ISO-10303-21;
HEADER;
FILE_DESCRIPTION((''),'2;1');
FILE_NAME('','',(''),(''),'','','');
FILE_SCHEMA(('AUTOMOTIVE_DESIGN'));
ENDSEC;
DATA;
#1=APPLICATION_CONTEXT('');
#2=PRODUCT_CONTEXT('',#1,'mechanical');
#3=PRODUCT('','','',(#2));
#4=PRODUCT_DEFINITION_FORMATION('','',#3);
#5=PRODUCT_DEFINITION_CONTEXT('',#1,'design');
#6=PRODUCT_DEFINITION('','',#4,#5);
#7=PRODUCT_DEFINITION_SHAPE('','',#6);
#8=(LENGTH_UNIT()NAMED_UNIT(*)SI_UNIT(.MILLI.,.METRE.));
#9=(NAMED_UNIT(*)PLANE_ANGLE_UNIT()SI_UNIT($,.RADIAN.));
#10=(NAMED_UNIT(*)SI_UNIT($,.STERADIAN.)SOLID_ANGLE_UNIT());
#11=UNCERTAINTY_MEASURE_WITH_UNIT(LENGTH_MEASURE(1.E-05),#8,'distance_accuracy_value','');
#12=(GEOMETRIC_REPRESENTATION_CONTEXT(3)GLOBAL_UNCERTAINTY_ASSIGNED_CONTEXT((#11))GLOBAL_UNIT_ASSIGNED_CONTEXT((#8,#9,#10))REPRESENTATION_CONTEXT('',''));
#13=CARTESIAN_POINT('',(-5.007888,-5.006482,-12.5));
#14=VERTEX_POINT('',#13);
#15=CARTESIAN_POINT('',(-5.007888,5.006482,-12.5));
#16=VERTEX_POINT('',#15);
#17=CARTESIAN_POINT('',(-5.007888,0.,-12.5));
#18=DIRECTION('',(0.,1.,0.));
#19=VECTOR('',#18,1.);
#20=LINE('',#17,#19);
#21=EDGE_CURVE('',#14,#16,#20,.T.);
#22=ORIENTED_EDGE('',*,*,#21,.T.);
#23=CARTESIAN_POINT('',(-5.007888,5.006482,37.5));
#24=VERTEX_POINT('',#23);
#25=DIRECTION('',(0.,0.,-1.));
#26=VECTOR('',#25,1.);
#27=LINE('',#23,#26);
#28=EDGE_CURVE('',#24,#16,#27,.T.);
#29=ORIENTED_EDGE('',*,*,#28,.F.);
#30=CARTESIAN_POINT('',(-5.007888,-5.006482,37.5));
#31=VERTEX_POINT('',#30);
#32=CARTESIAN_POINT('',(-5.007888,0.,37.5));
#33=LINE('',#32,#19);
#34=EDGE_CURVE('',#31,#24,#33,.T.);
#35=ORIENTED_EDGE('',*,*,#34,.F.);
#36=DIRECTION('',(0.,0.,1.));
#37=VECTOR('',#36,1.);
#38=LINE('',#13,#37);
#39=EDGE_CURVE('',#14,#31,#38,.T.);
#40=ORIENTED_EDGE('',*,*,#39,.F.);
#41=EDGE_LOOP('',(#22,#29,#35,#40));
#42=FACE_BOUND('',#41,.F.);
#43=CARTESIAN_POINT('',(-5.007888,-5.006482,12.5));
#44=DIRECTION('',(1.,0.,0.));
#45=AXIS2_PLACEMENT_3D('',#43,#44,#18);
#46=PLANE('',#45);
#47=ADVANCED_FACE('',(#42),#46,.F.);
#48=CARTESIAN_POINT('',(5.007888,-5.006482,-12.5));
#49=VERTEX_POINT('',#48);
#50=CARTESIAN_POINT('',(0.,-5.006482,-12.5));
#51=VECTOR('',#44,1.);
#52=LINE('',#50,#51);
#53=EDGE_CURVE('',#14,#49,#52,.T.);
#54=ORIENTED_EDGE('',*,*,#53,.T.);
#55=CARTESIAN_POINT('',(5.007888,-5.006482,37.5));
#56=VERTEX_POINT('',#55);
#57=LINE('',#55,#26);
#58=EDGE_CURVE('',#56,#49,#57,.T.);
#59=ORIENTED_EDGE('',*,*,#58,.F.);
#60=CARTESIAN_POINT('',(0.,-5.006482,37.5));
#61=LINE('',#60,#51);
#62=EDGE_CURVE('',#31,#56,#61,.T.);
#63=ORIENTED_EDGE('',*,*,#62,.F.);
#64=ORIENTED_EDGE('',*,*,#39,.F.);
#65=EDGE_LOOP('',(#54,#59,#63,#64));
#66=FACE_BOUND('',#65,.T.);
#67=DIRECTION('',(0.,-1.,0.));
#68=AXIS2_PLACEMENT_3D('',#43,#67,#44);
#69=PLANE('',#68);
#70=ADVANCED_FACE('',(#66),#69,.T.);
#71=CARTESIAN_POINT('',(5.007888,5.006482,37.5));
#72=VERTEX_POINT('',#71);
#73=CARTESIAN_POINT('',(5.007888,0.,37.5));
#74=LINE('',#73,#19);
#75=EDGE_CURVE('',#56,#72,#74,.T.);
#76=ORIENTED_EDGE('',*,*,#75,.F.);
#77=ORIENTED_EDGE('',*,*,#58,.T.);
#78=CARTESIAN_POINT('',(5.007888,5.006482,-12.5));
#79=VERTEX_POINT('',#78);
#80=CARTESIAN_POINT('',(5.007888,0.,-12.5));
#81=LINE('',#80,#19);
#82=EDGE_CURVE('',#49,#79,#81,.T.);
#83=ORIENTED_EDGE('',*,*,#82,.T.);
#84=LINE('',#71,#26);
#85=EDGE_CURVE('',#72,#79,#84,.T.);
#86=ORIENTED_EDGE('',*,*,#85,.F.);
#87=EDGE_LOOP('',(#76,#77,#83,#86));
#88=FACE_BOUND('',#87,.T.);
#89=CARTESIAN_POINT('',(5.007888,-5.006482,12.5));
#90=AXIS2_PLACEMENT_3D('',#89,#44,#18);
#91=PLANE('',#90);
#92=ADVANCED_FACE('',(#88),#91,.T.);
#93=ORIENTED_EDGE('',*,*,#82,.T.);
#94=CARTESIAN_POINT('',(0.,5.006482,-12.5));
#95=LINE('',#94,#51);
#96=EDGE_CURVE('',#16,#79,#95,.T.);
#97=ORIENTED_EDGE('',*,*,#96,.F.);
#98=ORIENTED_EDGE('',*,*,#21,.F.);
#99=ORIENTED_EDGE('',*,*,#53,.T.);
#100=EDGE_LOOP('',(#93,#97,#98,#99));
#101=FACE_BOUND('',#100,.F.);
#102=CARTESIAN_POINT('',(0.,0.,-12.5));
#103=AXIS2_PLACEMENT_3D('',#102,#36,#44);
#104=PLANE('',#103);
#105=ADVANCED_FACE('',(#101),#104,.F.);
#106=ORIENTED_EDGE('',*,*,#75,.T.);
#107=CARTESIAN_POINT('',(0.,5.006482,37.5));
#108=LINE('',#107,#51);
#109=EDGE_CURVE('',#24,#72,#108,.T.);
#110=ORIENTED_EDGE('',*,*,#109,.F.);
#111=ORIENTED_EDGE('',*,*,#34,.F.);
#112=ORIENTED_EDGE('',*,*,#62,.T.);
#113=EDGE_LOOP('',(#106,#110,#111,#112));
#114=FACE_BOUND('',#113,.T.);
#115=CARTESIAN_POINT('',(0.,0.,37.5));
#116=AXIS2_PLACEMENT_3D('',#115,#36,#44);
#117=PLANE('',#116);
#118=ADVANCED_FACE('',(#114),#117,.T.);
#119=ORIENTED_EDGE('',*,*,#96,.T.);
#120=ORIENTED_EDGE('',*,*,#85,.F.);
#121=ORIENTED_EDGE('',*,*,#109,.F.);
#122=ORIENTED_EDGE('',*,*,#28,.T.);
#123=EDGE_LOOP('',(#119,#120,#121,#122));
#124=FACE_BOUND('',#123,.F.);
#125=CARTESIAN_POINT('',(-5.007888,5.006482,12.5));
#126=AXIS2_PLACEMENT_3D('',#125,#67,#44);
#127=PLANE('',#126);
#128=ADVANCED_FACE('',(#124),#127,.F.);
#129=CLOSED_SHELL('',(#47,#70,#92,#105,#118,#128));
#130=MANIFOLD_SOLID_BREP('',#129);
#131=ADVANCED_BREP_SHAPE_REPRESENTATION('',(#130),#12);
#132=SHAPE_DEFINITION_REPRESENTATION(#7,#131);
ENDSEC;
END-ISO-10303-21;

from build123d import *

# Parameters (mm, degrees)
F0_R     = 15
F1_DEPTH = 12.5
F2_W     = 10.0157754496
F2_H     = 10.012964718
F3_DEPTH = 25
F4_DEPTH = 25


# Not quite as in the source:
# - a feature of the source that left no trace in its solid (it failed there, or was rolled back) is left out


with BuildPart() as f1:
    # F0 (on Top) → F1 (new body, symmetric)
    with BuildSketch(Plane.XY):
        Circle(F0_R)
    extrude(amount=F1_DEPTH, both=True)

    # F2 (on face) → F3 (join)
    with BuildSketch(Plane.XY.offset(12.5)):
        Rectangle(F2_W, F2_H)
    extrude(amount=F3_DEPTH)

    # F4 (cut): a face of the model
    f4_faces = [f1.faces().sort_by_distance(p)[0] for p in [
        (-14.5757359313, 0, 12.5),
    ]]
    extrude(f4_faces, amount=-F4_DEPTH, mode=Mode.SUBTRACT)


solid = f1.part
